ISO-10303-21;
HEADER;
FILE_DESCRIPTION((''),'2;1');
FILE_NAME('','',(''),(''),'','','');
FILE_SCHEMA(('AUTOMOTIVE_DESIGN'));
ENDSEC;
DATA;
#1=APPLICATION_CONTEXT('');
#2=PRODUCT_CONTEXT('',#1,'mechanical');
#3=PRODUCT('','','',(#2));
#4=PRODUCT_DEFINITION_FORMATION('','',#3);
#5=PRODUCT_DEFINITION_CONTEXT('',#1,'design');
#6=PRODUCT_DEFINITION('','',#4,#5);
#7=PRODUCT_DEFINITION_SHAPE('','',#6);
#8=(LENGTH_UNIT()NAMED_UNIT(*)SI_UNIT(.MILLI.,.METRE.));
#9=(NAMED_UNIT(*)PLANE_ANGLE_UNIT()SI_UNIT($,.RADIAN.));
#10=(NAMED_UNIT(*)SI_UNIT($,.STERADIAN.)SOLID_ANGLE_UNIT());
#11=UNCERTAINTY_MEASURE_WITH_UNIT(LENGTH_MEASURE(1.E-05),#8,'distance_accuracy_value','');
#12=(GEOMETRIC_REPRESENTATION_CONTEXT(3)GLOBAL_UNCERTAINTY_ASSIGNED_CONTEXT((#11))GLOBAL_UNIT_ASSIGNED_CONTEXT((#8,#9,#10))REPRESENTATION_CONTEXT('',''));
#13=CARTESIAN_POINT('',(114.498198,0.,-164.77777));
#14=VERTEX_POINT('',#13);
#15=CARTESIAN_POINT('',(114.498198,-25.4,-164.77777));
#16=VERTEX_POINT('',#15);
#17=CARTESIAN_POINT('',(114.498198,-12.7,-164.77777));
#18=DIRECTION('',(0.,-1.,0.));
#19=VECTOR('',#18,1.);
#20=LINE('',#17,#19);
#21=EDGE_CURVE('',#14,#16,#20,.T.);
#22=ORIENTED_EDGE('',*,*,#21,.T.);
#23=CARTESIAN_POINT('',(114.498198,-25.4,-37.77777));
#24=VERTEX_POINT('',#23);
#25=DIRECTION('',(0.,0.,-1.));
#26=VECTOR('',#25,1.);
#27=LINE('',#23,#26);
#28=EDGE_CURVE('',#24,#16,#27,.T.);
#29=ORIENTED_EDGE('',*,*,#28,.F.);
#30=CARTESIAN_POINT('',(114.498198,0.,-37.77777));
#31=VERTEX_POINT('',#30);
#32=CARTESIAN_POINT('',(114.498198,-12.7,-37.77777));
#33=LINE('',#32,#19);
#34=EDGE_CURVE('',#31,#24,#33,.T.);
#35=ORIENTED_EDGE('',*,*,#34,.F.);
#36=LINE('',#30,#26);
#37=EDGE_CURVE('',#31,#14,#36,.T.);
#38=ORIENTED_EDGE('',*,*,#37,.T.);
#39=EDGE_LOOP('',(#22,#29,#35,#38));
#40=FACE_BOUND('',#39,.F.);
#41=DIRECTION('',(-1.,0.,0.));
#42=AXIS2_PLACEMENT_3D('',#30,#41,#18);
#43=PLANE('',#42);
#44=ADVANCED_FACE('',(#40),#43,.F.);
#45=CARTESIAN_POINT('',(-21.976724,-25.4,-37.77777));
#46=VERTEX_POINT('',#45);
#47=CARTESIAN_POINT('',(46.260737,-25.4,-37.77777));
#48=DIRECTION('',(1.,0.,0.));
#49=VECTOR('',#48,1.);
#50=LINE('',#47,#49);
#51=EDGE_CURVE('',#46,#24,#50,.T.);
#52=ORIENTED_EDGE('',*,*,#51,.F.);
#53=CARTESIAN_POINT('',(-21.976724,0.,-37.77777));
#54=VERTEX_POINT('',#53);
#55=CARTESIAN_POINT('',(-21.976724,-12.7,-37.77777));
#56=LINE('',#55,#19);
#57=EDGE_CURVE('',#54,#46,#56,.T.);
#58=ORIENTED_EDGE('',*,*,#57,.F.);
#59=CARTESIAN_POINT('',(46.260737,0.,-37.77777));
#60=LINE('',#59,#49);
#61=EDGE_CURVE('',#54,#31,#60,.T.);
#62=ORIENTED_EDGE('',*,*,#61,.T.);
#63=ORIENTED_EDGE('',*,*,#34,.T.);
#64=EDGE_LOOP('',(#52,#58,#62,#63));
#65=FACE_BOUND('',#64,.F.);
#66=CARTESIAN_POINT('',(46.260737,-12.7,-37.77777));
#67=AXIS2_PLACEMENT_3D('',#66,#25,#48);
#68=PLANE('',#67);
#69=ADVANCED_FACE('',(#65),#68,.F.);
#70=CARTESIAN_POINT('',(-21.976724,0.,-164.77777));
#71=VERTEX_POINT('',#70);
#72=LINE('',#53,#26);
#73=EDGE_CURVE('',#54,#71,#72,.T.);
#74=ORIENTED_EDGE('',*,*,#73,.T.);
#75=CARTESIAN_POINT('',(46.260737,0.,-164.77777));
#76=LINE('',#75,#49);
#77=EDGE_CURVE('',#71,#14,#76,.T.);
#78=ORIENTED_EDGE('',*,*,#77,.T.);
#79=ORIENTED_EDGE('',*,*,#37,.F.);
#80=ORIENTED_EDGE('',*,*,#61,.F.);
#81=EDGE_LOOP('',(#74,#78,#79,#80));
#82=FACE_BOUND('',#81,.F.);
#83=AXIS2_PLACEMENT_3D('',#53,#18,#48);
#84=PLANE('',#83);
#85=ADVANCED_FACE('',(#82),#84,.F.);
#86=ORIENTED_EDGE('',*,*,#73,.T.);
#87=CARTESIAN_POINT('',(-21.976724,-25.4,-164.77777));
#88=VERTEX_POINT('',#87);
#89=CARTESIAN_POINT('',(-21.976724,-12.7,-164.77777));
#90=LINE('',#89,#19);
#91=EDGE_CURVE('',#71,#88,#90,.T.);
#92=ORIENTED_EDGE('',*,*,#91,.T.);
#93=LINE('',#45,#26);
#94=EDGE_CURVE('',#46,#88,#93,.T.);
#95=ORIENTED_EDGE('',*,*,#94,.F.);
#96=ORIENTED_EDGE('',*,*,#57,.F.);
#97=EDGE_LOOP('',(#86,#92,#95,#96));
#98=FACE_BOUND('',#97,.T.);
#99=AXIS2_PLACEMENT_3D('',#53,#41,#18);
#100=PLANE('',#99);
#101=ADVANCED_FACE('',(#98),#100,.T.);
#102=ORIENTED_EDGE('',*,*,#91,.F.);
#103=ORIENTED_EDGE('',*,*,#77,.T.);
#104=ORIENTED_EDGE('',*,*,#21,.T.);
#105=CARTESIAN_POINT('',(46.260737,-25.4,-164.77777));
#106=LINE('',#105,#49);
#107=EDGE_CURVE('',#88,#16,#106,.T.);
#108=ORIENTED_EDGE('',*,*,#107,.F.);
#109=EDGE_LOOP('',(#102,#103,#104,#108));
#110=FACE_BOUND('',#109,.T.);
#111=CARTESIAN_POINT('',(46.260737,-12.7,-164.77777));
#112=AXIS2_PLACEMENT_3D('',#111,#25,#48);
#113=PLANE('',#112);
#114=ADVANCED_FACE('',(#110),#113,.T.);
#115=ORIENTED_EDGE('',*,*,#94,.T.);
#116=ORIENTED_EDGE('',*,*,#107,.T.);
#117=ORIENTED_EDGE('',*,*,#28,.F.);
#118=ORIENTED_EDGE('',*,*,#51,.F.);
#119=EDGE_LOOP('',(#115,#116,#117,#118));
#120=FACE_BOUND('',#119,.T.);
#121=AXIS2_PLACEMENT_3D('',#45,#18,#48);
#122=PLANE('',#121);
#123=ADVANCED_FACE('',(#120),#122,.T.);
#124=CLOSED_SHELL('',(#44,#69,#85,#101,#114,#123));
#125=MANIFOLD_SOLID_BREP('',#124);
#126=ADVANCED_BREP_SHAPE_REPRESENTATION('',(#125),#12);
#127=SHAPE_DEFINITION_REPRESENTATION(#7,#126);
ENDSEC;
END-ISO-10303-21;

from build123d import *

# Parameters (mm, degrees)
F1_E0_BOTTOM_W = 136.4749222994
F1_E0_BOTTOM_H = 25.4
F2_DEPTH       = 127


with BuildPart() as f2:
    # F1_E0_bottom (on explicit) → F2 (new body)
    with BuildSketch(Plane(origin=(-21.976724267, 0, -37.7777703106), x_dir=(1, 0, 0), z_dir=(0, 0, -1))):
        with Locations((68.2374611497, 12.7)):
            Rectangle(F1_E0_BOTTOM_W, F1_E0_BOTTOM_H)
    extrude(amount=F2_DEPTH)


solid = f2.part
